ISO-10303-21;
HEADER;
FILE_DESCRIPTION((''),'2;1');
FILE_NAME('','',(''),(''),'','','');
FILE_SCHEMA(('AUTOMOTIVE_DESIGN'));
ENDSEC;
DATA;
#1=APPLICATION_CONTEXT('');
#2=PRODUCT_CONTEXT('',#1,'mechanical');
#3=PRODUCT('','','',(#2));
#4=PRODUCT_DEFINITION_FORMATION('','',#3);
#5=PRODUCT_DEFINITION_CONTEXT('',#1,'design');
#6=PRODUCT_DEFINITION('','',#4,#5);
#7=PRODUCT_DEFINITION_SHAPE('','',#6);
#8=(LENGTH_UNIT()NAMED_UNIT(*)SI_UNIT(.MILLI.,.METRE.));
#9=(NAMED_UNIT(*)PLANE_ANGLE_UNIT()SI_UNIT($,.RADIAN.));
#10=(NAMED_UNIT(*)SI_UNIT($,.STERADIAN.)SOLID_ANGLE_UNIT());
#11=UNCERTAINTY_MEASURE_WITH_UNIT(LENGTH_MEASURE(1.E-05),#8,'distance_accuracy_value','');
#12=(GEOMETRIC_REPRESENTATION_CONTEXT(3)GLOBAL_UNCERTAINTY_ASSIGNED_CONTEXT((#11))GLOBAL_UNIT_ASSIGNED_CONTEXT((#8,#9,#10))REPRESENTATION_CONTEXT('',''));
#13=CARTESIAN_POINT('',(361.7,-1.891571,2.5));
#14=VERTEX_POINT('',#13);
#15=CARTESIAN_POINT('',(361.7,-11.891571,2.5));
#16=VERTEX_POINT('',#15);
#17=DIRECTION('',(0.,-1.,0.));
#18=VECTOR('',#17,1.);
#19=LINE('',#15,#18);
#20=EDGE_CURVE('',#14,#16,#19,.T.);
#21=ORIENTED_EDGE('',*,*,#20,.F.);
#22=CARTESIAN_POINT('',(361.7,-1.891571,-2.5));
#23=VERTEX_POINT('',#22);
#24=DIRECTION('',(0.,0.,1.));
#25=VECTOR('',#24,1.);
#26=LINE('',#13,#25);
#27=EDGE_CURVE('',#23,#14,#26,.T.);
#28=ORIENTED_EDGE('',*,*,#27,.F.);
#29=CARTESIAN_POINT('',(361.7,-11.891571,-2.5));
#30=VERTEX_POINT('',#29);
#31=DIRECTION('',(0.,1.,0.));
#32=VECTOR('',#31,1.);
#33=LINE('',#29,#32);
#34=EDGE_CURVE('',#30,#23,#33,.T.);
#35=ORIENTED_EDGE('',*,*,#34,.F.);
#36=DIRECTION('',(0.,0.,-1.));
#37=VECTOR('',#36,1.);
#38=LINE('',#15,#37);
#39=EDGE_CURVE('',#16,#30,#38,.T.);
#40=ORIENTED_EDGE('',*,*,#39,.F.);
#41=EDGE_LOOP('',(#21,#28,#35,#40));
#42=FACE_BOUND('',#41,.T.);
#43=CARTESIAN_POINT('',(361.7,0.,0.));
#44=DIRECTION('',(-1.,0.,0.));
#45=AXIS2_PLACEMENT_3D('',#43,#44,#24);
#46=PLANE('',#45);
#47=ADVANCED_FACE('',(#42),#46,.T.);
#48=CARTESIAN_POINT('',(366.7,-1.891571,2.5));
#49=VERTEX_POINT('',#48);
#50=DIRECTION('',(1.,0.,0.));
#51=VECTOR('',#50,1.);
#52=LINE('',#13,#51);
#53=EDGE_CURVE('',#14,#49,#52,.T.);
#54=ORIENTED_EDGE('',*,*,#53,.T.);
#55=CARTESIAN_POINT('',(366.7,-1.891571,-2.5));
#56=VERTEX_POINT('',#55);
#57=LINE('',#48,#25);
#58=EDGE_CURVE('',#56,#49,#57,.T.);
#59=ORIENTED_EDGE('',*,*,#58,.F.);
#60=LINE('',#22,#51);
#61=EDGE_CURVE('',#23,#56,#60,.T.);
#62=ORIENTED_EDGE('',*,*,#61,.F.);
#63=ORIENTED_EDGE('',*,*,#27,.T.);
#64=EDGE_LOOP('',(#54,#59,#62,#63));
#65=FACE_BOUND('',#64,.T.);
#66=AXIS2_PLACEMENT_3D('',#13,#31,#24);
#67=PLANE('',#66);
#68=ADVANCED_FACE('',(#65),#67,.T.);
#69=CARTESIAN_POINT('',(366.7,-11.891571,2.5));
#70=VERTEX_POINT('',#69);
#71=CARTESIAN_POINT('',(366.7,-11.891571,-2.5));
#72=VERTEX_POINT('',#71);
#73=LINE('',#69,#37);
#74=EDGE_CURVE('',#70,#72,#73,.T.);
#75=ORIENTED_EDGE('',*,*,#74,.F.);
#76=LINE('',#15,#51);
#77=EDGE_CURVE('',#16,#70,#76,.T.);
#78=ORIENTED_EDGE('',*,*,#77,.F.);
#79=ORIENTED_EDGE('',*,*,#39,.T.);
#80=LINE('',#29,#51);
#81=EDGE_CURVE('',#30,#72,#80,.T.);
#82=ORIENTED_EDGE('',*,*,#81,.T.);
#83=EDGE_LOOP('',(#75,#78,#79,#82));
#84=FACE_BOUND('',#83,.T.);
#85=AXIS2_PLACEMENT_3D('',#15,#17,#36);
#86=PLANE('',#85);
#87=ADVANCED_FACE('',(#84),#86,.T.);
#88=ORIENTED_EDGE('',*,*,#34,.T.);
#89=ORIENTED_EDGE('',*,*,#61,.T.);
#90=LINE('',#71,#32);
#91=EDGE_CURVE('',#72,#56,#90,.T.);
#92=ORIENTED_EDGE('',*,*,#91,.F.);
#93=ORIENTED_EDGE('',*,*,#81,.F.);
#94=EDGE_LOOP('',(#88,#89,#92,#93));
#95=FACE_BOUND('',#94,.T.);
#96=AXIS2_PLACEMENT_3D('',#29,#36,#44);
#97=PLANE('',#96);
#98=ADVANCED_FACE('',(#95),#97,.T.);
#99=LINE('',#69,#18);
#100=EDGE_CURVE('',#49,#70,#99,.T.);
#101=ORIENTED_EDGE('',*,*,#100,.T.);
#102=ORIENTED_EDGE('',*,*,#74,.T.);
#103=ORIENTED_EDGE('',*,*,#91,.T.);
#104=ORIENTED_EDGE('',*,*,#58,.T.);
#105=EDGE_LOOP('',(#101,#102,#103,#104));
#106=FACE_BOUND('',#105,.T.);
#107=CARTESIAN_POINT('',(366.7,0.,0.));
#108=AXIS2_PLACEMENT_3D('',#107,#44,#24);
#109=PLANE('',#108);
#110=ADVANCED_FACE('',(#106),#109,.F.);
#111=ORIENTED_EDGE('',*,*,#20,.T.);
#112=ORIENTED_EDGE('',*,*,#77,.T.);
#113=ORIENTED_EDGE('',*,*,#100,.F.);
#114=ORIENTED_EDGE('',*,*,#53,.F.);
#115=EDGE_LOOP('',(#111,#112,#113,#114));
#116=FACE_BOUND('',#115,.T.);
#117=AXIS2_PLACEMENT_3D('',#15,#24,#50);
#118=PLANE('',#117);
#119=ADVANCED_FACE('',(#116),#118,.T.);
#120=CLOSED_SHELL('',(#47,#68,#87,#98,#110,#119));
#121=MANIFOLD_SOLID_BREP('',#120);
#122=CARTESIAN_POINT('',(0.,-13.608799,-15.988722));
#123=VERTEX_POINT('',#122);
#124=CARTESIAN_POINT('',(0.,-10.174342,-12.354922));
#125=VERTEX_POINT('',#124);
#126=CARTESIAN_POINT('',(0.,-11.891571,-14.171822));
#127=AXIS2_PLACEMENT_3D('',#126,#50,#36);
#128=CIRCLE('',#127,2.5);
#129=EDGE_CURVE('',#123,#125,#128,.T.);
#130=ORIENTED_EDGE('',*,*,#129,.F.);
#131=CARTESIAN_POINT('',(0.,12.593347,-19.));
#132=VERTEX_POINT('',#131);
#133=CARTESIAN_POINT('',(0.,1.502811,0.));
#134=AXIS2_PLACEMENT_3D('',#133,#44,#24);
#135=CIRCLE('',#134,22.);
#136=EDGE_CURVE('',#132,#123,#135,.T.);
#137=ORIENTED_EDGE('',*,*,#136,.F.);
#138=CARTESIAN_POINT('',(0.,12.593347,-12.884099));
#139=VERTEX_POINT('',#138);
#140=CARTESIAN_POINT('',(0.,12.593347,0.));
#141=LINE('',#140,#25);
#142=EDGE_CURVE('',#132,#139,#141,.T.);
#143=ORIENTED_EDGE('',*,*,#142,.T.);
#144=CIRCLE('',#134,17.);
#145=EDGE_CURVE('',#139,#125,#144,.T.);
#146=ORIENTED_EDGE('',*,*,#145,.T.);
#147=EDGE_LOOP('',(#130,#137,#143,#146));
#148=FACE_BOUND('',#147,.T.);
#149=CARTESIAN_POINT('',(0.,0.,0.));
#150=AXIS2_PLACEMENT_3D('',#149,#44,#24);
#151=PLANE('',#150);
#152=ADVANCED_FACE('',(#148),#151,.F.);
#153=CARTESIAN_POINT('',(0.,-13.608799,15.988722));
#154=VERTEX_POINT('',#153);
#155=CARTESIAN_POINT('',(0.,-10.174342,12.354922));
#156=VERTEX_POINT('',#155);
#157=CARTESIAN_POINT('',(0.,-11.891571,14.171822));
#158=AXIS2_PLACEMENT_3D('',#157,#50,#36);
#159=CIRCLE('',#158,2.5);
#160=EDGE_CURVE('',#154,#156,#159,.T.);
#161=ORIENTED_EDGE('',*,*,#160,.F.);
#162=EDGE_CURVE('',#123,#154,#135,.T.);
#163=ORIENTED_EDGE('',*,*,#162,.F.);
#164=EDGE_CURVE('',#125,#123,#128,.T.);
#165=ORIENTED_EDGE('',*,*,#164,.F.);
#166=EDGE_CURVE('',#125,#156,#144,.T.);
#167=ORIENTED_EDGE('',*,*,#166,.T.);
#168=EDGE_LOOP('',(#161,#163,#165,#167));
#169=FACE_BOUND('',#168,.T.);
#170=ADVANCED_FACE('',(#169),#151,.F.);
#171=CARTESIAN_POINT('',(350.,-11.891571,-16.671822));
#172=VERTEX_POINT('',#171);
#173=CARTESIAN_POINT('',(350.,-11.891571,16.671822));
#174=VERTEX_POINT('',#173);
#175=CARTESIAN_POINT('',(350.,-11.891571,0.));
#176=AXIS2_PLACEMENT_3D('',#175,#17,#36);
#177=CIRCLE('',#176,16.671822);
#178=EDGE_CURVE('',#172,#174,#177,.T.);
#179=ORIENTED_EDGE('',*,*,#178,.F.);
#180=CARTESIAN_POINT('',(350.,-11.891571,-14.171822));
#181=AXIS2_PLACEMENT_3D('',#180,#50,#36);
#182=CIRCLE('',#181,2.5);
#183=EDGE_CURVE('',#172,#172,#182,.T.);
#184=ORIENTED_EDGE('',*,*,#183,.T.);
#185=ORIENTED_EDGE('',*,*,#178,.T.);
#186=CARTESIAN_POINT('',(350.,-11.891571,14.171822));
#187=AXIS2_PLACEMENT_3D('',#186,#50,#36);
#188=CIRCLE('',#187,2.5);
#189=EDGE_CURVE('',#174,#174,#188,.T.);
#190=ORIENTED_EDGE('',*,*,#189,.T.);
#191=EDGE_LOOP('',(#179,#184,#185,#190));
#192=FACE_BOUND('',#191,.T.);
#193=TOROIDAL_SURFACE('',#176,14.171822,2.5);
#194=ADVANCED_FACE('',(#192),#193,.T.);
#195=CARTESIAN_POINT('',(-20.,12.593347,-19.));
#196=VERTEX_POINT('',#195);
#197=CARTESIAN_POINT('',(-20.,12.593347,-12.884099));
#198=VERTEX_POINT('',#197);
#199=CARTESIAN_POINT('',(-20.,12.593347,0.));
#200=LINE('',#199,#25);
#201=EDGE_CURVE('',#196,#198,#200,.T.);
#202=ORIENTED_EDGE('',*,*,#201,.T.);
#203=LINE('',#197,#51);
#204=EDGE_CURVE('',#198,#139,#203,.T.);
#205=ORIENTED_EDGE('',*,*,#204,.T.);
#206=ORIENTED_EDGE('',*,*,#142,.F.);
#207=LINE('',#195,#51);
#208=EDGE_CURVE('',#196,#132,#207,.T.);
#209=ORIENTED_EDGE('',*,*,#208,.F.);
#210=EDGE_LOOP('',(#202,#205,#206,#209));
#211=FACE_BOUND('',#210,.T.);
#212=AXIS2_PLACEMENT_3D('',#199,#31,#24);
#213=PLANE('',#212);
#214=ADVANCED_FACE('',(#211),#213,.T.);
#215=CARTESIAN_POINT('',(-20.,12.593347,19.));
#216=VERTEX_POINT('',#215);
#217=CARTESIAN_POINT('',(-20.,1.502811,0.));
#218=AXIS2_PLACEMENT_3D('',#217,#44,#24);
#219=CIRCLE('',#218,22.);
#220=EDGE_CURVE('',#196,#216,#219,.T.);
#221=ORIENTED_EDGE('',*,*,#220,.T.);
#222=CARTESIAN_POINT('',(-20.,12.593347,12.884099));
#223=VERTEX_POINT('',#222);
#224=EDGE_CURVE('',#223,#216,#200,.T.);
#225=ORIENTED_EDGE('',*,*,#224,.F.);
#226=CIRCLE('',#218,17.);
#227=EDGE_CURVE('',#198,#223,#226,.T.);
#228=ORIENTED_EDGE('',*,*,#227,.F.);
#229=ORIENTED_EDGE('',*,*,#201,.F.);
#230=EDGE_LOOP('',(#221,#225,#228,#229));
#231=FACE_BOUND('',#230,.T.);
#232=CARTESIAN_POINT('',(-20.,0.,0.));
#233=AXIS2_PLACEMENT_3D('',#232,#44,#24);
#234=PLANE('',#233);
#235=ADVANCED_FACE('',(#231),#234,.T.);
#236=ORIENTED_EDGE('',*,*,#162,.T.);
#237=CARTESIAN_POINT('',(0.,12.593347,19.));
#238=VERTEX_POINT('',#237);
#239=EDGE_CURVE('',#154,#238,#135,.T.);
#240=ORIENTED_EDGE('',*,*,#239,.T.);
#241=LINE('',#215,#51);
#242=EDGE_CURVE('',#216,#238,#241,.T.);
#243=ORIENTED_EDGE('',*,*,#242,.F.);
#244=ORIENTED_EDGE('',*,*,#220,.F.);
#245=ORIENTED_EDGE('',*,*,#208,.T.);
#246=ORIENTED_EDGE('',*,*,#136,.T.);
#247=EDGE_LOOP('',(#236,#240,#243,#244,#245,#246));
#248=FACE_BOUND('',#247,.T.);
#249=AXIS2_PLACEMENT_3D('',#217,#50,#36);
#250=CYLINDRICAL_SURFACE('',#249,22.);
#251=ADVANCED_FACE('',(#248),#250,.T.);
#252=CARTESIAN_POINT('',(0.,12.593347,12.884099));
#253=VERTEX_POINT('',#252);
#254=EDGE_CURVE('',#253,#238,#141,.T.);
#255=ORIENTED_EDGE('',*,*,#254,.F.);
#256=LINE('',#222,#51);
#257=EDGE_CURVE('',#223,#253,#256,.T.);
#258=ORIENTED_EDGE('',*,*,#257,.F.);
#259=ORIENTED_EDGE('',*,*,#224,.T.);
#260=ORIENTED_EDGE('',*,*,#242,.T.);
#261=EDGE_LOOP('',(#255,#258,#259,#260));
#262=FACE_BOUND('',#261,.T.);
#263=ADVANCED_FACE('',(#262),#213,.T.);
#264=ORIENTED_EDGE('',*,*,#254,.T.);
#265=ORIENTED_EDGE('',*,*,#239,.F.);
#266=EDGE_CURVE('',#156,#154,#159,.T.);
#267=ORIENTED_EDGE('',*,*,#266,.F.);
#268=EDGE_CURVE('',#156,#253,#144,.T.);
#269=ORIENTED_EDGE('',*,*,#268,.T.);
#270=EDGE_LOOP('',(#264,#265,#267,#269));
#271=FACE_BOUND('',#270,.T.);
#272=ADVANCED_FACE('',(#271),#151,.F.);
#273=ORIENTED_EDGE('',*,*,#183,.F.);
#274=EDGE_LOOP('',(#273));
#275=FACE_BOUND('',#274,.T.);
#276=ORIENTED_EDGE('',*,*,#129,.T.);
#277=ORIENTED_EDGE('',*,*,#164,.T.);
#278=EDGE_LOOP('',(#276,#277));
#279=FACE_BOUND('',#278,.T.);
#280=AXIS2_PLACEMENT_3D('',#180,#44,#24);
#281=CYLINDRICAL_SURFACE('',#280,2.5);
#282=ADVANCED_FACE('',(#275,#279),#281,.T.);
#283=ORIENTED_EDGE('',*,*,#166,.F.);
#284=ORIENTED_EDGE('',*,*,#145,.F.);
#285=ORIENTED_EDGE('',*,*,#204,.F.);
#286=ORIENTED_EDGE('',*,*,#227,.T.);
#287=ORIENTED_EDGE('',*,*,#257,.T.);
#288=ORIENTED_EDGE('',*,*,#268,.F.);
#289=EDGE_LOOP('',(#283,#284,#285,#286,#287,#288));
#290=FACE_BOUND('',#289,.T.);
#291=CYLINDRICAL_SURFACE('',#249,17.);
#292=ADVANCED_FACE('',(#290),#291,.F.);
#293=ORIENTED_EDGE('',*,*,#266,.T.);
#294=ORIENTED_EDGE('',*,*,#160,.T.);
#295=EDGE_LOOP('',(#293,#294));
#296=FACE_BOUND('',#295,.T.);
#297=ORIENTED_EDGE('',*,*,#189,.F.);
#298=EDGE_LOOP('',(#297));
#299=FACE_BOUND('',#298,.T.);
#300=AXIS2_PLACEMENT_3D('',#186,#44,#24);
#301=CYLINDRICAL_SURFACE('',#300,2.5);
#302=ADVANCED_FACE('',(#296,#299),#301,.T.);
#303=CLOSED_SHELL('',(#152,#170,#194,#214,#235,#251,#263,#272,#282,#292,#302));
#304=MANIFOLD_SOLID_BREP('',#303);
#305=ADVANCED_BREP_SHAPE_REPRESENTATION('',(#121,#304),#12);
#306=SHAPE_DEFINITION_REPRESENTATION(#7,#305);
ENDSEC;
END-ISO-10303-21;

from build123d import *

# Parameters (mm, degrees)
SKETCH1_R             = 2.5
BOSS_EXTRUDE1_DEPTH   = 350
BOSS_EXTRUDE1_2_DEPTH = 350
REVOLVE1_OUTLINE_R    = 2.5
REVOLVE1_ANGLE        = 180
SKETCH4_W             = 5
SKETCH4_H             = 10
BOSS_EXTRUDE2_DEPTH   = 5
BOSS_EXTRUDE3_DEPTH   = 20


# Read off the part's stored shape, not the designer's step: Revolve1
with BuildPart() as part:
    # Sketch1 → Boss-Extrude1 (new body)
    with BuildSketch(Plane(origin=(0, 0, 0), x_dir=(0, 0, -1), z_dir=(1, 0, 0))):
        with Locations((14.171822198, -11.891570779)):
            Circle(SKETCH1_R)
    extrude(amount=BOSS_EXTRUDE1_DEPTH)



with BuildPart() as body_2:
    # Sketch1 → Boss-Extrude1 2 (new body)
    with BuildSketch(Plane(origin=(0, 0, 0), x_dir=(0, 0, -1), z_dir=(1, 0, 0))):
        with Locations((-14.171822198, -11.891570779)):
            Circle(SKETCH1_R)
    extrude(amount=BOSS_EXTRUDE1_2_DEPTH)


with BuildPart() as part_1:
    add(part.part)

    add(body_2.part)  # Revolve1 merges body 2
    # Revolve1 outline → Revolve1 (revolve)
    with BuildSketch(Plane.ZY.offset(-350)):
        with Locations((14.171822198, -11.891570779)):
            Circle(REVOLVE1_OUTLINE_R)
    revolve(axis=Axis((350, 0, 0), (0, 1, 0)), revolution_arc=REVOLVE1_ANGLE)

    # Sketch5 → Boss-Extrude3 (add)
    with BuildSketch(Plane.ZY):
        with BuildLine():
            Line((-12.884098727, 12.593347221), (-19, 12.593347221))
            ThreePointArc((-19, 12.593347221), (0, -20.497189286), (19, 12.593347221))
            Line((19, 12.593347221), (12.884098727, 12.593347221))
            ThreePointArc((12.884098727, 12.593347221), (0, -15.497189286), (-12.884098727, 12.593347221))
        make_face()
    extrude(amount=BOSS_EXTRUDE3_DEPTH)


with BuildPart() as body_2_2:
    # Sketch4 → Boss-Extrude2 (new body)
    with BuildSketch(Plane(origin=(366.7, 0, 0), x_dir=(0, 0, -1), z_dir=(1, 0, 0))):
        with Locations((0, -6.891570779)):
            Rectangle(SKETCH4_W, SKETCH4_H)
    extrude(amount=-BOSS_EXTRUDE2_DEPTH)


solid = Compound([part_1.part, body_2_2.part])
